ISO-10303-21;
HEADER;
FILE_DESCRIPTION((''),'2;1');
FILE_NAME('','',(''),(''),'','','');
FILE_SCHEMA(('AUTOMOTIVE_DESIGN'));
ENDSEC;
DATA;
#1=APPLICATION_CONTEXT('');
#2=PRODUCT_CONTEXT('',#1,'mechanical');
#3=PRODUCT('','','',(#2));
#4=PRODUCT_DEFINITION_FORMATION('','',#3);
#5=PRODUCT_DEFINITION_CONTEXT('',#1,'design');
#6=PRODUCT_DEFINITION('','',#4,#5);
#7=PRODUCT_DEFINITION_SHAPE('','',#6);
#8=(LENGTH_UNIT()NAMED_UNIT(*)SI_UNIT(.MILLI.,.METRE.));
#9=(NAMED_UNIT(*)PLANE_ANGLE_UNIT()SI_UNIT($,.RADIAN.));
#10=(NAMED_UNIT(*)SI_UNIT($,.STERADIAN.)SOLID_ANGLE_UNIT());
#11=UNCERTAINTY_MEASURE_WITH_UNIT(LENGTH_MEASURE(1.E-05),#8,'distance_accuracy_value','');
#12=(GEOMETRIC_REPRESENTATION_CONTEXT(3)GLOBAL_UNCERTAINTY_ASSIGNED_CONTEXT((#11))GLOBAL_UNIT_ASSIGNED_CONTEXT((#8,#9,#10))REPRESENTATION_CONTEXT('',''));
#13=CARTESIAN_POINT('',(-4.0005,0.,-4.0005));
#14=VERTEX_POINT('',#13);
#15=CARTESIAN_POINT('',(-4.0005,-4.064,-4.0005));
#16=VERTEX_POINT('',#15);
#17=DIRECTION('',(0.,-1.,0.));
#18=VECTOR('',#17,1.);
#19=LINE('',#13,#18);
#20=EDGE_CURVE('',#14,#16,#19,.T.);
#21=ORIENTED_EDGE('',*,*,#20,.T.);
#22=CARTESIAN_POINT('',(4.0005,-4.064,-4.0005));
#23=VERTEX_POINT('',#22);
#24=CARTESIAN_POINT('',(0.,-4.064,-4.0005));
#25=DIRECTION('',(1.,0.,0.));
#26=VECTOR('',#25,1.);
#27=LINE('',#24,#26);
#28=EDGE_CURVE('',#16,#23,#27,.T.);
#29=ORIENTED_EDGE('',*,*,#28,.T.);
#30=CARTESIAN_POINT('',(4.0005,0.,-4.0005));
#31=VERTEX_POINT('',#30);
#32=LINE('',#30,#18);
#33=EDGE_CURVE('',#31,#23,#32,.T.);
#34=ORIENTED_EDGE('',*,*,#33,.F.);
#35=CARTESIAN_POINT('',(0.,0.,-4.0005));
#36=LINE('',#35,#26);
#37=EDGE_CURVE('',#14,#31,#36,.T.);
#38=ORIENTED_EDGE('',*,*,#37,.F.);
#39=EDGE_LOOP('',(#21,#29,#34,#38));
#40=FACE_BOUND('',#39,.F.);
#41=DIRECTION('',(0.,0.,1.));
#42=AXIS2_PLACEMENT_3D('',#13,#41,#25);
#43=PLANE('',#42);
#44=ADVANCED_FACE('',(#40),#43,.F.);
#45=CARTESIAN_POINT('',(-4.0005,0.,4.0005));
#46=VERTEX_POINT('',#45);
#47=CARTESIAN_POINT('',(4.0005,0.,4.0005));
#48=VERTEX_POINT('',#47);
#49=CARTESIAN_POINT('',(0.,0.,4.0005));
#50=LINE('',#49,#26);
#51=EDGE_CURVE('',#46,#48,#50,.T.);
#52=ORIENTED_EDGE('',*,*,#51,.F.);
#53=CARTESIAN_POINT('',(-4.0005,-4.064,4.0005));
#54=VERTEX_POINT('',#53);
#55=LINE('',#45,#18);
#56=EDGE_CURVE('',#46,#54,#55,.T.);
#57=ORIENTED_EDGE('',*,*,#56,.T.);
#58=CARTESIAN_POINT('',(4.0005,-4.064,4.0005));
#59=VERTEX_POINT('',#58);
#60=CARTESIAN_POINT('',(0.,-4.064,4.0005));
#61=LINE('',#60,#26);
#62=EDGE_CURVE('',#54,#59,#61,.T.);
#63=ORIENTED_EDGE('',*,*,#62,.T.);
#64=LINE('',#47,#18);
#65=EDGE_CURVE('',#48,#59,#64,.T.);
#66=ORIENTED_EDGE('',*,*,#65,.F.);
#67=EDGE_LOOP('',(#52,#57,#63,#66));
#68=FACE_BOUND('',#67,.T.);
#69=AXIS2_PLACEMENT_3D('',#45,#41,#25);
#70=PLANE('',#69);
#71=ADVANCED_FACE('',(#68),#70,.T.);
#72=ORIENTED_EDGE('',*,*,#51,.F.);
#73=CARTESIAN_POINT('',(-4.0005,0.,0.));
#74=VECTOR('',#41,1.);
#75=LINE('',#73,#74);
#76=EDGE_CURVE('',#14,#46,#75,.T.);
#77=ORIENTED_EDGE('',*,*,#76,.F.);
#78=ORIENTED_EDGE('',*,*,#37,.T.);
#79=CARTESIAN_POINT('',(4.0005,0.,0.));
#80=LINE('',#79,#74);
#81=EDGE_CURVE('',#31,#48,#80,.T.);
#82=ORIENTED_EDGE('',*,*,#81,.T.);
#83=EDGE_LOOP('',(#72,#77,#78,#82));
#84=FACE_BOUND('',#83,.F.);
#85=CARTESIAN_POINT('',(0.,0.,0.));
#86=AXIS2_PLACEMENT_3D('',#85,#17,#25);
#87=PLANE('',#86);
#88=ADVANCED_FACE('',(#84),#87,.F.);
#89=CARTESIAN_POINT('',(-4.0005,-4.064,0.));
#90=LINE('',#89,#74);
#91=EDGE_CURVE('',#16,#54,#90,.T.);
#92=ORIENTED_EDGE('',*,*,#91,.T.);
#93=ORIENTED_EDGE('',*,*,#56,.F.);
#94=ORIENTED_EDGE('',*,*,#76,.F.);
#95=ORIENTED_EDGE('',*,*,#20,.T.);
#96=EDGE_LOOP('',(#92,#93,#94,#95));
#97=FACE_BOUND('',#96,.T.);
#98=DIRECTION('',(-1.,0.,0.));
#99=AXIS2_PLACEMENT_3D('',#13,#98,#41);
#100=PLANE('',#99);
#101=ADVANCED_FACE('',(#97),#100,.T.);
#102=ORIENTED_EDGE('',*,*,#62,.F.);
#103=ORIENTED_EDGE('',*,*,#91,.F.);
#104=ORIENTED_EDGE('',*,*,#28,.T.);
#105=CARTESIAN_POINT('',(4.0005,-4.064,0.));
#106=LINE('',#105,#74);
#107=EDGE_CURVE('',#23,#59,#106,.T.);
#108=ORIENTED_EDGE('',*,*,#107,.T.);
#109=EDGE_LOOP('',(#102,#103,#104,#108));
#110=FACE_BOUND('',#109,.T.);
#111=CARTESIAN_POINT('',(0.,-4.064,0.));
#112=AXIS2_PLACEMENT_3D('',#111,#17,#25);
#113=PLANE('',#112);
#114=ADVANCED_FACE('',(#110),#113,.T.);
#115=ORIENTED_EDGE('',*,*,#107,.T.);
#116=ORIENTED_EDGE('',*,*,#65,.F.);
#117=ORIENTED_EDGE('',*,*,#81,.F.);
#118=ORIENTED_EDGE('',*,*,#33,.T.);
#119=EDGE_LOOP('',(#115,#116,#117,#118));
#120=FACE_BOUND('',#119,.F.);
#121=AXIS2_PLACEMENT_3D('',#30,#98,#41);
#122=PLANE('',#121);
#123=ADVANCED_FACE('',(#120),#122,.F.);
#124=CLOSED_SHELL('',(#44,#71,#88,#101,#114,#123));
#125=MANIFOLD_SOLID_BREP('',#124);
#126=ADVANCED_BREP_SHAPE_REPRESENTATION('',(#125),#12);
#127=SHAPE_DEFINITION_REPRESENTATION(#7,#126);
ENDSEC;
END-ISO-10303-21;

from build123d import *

# Parameters (mm, degrees)
F1_W     = 8.001
F1_H     = 8.001
F2_DEPTH = 4.064


# Not quite as in the source:
# - a variable given as a bare number and used for a length is read in inches; the dataset says mm whatever the document's units were


with BuildPart() as f2:
    # F1 (on Front) → F2 (new body)
    with BuildSketch(Plane.XZ):
        Rectangle(F1_W, F1_H)
    extrude(amount=F2_DEPTH)


solid = f2.part
